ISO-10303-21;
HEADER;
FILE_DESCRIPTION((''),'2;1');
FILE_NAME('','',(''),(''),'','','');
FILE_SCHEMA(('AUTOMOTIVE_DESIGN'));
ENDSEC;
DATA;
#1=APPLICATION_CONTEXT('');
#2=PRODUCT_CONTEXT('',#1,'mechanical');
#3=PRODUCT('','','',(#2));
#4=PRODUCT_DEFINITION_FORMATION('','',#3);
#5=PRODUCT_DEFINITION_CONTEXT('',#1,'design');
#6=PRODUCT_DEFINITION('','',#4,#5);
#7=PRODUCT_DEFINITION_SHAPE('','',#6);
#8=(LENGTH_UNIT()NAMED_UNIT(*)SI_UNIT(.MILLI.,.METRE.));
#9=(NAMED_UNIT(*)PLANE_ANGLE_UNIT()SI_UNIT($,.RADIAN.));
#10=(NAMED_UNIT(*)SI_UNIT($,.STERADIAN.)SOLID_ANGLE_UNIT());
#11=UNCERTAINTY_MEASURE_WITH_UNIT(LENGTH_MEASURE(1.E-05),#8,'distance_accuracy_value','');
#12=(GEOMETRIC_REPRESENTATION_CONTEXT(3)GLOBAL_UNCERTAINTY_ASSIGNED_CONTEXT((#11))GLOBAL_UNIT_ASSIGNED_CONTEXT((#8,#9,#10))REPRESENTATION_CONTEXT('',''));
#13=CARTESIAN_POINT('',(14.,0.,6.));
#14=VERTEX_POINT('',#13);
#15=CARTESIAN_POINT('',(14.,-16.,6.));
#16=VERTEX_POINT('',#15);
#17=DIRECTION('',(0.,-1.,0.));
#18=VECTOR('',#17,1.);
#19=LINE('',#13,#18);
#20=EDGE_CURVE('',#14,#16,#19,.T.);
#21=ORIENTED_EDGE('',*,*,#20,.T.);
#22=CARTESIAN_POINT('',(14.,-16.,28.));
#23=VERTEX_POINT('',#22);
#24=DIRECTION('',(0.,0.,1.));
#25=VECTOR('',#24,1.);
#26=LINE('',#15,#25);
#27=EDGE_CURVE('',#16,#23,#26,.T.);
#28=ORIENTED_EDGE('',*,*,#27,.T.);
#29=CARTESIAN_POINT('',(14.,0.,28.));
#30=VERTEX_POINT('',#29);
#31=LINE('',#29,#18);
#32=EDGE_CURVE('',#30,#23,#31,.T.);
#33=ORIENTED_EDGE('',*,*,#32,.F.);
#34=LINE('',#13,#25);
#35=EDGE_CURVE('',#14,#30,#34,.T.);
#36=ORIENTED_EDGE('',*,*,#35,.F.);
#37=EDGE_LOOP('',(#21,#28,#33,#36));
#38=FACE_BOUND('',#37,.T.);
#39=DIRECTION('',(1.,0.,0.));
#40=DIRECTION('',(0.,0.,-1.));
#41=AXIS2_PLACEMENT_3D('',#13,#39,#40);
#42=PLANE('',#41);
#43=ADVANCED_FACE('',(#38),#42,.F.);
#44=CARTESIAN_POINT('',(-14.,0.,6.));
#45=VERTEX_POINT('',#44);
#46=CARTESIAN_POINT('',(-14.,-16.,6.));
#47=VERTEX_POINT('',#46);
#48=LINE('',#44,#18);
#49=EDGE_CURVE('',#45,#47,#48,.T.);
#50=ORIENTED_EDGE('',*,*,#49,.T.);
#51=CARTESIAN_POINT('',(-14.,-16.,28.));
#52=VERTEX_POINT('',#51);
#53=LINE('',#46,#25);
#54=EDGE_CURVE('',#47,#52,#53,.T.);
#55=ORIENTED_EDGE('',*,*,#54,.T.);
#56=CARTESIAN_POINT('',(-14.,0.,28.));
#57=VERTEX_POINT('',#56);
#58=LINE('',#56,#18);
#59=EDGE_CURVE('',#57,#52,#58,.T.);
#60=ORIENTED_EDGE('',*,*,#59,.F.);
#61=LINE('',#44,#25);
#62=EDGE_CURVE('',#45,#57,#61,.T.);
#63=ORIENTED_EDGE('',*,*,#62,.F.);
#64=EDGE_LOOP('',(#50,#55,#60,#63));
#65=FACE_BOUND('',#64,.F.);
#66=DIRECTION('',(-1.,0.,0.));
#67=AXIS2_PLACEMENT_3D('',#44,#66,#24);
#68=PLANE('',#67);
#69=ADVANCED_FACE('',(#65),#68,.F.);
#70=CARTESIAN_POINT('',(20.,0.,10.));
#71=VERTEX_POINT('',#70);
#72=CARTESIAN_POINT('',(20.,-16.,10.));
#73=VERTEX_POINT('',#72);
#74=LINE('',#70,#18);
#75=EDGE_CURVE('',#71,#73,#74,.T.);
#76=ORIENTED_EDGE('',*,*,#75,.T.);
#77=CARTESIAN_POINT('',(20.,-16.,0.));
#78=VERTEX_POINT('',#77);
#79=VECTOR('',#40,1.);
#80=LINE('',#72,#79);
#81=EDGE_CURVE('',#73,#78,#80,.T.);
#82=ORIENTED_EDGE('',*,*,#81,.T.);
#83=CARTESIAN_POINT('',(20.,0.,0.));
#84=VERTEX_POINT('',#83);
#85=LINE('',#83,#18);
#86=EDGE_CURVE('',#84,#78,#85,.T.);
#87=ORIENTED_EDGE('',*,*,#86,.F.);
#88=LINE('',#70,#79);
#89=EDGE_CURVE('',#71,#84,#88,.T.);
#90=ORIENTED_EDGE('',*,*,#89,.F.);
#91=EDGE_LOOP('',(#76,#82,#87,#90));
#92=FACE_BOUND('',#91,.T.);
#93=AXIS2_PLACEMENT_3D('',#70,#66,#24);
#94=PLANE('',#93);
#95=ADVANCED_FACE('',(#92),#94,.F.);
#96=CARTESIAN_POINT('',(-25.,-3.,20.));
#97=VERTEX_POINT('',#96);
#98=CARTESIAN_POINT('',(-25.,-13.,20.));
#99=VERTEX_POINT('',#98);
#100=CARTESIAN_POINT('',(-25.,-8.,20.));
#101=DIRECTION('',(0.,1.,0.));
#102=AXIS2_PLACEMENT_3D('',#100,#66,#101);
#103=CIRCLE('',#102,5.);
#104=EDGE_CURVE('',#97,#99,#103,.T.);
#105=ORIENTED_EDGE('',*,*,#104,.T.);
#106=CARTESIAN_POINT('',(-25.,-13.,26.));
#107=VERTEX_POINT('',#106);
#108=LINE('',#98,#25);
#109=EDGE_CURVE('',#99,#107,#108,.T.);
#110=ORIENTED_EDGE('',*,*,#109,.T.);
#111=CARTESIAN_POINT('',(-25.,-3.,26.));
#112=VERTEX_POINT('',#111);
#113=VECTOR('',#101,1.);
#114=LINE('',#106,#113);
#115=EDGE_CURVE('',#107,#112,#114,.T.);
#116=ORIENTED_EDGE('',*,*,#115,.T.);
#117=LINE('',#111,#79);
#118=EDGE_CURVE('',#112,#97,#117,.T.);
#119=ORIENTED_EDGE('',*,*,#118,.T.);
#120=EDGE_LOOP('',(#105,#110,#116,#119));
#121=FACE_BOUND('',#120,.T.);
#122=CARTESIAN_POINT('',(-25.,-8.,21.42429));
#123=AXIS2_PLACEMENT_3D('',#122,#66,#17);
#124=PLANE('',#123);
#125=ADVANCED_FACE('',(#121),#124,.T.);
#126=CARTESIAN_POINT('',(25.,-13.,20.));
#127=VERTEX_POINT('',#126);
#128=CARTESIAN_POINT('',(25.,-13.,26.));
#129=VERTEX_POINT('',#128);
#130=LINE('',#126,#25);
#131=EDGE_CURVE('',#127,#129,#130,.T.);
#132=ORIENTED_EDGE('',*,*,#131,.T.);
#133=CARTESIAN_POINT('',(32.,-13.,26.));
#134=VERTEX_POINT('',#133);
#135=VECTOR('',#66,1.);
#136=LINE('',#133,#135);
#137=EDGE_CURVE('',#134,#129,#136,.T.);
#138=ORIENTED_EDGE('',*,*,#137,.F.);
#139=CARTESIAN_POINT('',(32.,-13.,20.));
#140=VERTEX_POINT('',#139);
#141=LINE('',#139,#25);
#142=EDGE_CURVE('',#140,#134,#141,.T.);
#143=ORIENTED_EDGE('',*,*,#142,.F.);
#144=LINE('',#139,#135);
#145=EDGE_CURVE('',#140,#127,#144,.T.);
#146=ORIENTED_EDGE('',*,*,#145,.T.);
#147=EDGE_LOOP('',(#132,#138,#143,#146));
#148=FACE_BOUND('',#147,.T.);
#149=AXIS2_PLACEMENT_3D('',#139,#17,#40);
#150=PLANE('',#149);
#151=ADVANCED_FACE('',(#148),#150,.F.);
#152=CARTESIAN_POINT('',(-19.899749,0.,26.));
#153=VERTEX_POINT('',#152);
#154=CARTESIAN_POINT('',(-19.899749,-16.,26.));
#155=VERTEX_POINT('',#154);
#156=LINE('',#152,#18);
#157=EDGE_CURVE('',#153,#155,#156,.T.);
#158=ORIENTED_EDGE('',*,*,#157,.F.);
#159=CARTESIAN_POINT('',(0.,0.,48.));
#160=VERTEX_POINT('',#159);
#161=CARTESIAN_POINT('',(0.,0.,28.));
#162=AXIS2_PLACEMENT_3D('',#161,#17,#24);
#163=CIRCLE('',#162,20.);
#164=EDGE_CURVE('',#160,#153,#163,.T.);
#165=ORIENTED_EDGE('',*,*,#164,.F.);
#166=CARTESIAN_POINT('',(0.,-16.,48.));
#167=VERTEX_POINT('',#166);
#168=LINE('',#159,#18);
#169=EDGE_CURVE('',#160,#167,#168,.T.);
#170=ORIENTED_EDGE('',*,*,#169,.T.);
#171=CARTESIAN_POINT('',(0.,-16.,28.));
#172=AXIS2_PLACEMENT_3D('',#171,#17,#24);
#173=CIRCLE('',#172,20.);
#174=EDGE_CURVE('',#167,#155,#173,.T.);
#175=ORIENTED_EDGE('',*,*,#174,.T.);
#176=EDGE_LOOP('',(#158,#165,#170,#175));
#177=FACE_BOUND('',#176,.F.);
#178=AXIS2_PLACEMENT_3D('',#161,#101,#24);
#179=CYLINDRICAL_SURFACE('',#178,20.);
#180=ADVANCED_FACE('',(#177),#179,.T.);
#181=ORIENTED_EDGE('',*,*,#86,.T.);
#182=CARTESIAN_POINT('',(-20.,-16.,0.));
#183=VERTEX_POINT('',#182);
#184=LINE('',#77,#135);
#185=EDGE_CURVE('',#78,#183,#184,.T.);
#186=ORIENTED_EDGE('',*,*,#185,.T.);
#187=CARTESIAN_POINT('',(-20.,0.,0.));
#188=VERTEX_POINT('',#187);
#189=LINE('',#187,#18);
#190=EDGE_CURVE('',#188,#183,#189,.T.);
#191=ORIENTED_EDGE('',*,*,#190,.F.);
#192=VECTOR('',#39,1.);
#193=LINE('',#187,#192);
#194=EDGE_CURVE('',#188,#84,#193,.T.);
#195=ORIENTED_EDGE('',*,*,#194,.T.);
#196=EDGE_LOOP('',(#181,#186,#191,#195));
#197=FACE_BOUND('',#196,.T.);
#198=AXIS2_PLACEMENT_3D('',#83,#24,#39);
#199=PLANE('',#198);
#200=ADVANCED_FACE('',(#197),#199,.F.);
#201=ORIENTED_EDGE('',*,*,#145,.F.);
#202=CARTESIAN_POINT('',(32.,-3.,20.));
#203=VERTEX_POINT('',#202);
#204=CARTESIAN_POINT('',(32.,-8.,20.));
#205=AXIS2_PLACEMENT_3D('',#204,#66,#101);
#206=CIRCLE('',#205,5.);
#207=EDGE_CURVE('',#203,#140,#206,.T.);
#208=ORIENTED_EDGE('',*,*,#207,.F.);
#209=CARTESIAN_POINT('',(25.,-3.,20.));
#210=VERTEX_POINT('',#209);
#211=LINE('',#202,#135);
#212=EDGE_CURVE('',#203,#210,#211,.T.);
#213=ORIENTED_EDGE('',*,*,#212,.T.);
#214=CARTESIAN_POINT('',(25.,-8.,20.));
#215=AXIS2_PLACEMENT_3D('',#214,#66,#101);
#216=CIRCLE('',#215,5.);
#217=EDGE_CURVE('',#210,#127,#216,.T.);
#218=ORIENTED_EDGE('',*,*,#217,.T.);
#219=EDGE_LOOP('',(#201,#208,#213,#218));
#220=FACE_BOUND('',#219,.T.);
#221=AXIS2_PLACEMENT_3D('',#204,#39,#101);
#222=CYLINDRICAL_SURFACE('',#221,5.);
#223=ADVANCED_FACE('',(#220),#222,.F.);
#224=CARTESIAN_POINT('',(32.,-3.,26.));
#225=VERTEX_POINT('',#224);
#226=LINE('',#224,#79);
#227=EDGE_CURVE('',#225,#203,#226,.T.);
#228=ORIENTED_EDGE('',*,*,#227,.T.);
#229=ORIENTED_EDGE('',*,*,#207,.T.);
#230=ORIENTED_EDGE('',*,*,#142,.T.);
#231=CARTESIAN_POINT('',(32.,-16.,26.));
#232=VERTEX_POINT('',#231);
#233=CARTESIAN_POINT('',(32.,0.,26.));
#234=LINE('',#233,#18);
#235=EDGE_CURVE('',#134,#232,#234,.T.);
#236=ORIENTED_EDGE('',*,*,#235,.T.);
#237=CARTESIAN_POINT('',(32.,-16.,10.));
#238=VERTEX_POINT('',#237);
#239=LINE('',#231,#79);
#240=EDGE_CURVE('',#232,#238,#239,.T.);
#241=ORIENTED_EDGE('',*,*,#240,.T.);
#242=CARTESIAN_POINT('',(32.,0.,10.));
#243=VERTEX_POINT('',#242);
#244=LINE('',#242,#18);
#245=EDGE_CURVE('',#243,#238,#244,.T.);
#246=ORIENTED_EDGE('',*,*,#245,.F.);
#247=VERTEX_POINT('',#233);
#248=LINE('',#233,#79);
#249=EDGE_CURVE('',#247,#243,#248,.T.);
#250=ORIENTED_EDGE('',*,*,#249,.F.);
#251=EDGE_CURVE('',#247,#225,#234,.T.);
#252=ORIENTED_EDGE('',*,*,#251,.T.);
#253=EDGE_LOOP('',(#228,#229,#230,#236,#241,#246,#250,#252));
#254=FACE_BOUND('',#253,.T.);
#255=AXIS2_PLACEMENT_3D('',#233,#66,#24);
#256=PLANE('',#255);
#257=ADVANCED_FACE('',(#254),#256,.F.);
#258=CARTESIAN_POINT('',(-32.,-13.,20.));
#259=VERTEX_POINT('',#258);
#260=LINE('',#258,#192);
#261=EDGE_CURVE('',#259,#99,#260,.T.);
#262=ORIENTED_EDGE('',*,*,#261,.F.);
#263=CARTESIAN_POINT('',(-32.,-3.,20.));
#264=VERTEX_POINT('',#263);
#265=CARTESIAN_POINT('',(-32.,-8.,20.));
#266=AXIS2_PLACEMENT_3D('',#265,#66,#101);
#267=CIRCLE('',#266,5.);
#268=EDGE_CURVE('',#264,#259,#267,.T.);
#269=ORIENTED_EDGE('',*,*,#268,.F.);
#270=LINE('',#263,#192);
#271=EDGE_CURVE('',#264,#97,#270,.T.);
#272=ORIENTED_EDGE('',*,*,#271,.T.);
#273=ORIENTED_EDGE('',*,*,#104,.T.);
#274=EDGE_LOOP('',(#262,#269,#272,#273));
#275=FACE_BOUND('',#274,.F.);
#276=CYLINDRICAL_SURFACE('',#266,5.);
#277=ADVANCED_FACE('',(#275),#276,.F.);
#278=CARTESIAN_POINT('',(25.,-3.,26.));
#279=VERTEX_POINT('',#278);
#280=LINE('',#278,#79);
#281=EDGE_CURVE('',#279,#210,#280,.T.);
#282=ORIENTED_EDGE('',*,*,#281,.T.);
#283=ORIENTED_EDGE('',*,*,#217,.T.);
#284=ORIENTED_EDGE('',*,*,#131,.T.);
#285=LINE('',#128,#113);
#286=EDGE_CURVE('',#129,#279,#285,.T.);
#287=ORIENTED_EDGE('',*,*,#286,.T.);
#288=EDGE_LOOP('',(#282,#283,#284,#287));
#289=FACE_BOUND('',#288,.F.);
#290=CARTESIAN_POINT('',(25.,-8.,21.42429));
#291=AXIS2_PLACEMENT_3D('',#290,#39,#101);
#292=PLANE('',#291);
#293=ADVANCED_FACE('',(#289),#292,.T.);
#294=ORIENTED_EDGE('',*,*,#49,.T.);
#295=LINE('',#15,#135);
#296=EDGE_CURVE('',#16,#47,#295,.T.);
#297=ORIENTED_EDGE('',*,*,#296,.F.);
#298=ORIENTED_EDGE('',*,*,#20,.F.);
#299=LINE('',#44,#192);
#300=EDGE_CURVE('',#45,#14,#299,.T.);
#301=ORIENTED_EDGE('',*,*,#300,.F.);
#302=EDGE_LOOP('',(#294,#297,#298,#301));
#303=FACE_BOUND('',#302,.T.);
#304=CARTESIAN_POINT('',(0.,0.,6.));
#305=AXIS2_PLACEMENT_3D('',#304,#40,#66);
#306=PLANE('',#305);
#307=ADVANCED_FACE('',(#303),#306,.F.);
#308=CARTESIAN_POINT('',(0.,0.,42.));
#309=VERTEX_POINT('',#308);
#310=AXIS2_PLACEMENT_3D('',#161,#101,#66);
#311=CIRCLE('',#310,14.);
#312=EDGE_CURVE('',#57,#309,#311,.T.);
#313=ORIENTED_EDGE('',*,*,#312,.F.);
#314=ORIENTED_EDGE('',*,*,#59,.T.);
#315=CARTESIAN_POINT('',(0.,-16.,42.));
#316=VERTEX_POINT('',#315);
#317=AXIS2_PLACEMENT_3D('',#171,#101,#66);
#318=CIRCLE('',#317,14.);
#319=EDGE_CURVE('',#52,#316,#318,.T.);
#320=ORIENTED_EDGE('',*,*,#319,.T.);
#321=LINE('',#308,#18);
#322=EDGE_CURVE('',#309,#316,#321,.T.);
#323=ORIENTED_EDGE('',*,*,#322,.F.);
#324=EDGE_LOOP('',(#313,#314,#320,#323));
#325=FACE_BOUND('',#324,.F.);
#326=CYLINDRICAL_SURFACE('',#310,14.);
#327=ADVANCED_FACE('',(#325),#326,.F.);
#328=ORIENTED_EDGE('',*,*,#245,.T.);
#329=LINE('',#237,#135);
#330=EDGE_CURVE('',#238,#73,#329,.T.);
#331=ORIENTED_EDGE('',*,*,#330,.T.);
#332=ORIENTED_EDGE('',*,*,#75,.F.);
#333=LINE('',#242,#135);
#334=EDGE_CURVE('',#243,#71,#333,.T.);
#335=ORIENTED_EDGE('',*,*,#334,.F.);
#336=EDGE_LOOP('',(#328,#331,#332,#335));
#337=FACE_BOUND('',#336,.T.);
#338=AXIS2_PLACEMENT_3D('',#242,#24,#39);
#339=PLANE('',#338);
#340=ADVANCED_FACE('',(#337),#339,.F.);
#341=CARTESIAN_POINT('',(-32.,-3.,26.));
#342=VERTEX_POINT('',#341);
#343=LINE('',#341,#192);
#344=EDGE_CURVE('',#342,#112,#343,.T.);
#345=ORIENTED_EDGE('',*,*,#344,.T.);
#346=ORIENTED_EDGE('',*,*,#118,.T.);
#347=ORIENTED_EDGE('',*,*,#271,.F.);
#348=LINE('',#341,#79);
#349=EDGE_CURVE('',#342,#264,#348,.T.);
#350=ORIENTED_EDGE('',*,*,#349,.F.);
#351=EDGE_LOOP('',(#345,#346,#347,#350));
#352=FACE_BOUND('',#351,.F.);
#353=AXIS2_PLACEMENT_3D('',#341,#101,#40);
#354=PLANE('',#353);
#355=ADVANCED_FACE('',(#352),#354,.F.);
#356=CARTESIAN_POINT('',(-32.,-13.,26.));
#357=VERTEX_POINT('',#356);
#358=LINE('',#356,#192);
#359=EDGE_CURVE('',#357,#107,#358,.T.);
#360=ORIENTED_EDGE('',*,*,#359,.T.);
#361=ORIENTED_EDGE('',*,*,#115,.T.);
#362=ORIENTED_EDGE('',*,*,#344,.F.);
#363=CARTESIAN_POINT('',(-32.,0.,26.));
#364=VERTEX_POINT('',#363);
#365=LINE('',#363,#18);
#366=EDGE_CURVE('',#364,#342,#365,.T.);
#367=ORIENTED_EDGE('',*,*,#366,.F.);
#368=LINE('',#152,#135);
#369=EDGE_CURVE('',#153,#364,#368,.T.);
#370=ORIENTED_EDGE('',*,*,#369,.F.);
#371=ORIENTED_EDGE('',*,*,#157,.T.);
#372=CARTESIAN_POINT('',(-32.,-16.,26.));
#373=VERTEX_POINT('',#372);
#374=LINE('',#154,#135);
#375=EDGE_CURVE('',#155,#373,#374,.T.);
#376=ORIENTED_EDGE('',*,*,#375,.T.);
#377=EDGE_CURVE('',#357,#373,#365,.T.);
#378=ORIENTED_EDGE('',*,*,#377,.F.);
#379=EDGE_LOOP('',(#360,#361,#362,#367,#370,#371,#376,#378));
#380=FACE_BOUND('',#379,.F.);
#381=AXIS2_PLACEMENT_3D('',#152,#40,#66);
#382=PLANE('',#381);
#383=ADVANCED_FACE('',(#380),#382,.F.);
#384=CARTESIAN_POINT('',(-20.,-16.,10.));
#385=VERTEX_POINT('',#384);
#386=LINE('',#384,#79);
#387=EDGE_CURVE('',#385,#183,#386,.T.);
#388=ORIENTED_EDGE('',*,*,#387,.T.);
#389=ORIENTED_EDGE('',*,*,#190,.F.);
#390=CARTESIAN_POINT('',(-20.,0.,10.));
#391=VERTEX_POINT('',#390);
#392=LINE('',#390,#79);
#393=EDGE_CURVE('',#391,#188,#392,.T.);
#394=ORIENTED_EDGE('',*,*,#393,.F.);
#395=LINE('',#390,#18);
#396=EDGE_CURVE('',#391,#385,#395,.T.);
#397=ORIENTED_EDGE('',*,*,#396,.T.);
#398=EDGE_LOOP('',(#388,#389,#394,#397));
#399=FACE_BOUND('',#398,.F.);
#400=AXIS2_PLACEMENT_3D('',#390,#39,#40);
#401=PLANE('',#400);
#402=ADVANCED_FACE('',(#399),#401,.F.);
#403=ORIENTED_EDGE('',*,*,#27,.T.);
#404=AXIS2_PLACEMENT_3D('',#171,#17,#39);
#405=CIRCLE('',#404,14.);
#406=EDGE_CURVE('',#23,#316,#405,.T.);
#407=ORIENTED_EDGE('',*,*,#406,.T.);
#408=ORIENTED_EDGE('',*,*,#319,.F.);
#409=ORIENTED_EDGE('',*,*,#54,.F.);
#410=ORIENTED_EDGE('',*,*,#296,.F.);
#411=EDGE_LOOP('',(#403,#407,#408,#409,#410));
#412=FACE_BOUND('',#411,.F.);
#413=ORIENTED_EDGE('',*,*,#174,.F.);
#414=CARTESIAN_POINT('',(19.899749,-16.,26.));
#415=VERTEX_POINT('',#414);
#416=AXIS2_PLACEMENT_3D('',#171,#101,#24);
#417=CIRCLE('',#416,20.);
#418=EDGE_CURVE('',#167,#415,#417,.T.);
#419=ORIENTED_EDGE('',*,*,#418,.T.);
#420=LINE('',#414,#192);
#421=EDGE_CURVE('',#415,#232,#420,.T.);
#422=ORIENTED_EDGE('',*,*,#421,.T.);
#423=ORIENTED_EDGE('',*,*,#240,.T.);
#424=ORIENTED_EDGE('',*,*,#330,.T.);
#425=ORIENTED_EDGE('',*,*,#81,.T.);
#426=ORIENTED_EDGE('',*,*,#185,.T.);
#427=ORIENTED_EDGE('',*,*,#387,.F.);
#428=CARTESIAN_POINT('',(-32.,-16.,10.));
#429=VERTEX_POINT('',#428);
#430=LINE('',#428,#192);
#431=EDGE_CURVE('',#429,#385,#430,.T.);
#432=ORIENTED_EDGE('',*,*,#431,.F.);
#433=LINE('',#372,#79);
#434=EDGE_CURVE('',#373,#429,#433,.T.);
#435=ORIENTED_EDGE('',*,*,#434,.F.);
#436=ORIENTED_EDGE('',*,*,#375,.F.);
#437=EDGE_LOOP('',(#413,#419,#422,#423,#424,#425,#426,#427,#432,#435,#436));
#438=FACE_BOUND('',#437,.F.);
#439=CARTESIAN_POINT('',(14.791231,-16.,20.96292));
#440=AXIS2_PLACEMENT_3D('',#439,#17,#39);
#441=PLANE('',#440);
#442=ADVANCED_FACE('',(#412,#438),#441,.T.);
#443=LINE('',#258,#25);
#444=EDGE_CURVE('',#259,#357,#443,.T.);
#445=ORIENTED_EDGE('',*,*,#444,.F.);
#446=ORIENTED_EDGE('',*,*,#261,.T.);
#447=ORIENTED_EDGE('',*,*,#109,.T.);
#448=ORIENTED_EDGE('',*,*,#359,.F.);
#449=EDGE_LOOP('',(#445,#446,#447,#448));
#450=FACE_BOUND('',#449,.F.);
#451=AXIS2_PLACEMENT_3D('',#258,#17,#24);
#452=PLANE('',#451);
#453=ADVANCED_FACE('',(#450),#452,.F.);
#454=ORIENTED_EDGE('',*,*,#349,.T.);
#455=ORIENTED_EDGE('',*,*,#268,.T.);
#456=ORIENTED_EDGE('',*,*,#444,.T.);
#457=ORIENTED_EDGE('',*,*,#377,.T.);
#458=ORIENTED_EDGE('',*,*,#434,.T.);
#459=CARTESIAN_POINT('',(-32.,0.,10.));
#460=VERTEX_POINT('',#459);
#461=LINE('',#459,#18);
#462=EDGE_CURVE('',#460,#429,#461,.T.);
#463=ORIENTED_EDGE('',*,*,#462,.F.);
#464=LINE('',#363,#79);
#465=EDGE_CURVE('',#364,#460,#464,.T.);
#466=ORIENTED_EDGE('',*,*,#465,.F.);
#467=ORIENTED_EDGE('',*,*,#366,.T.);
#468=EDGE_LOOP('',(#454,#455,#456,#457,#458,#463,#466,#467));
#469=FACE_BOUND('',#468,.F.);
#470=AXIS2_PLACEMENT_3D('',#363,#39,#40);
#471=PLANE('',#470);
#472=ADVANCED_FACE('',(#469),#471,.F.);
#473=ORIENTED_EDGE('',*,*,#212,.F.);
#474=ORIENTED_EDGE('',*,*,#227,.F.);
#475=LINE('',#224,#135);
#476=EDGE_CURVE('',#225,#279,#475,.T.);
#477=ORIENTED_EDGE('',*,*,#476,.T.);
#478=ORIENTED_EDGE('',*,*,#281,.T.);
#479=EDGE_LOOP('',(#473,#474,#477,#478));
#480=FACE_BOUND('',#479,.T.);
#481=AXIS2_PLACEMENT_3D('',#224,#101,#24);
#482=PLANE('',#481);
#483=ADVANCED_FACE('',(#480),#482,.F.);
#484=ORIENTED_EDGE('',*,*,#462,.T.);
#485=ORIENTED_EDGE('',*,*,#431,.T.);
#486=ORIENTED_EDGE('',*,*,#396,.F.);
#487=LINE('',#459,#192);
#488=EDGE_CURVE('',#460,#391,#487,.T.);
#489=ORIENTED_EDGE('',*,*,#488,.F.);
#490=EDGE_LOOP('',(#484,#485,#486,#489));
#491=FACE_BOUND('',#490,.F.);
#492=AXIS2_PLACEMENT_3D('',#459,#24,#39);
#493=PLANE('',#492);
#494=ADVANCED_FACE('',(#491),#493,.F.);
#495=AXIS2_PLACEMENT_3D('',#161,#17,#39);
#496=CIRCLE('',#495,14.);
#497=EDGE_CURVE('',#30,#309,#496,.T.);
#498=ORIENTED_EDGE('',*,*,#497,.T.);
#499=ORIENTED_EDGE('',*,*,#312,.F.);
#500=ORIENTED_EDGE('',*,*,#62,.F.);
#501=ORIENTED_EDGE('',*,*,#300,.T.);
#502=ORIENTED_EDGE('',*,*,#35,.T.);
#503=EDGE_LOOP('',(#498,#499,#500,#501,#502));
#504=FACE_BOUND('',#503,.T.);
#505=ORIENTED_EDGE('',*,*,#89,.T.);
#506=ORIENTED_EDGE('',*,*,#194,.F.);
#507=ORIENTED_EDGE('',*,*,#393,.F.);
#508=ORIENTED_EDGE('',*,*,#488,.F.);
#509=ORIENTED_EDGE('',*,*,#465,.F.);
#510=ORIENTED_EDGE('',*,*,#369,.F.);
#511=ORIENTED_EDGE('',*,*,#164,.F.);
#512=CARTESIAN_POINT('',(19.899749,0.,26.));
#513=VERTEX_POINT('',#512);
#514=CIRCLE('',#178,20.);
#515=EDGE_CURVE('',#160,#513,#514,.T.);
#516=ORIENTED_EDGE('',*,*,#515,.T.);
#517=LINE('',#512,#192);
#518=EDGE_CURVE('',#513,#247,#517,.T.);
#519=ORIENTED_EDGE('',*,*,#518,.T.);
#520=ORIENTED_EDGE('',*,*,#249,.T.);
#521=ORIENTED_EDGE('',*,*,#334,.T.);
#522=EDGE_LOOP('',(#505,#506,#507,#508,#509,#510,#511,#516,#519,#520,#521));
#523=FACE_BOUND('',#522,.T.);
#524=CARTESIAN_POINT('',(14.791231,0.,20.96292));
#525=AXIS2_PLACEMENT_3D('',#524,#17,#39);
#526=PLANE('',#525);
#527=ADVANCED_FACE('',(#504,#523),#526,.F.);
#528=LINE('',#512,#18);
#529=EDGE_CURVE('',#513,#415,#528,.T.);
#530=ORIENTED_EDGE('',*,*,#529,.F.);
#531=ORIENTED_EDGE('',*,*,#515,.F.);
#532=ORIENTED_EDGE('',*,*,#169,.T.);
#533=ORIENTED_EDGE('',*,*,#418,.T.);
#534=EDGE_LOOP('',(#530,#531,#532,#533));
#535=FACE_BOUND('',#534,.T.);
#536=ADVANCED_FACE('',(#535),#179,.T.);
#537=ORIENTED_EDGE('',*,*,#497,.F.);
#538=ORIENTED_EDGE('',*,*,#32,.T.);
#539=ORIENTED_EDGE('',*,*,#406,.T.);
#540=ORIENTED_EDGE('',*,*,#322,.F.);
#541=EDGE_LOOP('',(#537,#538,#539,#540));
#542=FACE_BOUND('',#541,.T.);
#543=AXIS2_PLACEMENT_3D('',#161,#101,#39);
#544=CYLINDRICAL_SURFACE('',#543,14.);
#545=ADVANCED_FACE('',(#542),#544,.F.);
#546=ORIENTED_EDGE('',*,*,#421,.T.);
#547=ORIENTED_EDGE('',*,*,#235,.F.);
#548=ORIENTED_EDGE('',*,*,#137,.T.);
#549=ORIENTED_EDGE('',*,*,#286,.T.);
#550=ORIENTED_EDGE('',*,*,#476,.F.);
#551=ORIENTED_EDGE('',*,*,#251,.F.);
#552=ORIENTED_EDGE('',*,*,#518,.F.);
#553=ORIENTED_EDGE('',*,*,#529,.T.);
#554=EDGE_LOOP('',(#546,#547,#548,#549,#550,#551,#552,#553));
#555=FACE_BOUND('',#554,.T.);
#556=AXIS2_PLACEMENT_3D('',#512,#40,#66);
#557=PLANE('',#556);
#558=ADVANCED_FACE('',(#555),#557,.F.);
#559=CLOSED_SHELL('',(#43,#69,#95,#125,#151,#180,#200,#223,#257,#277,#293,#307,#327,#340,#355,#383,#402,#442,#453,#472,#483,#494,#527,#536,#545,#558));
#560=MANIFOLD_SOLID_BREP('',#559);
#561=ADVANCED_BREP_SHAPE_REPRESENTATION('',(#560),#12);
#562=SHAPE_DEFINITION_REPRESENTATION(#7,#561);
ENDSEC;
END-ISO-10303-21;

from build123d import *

# Parameters (mm, degrees)
F1_DEPTH = 16
F3_DEPTH = 7


# Not quite as in the source:
# - a pattern or mirror of a feature is missing from the dataset's text; its kind, count and spacing are read off the source's solid


with BuildPart() as f1:
    # F0 (on Front) → F1 (new body)
    with BuildSketch(Plane.XZ):
        with BuildLine():
            Line((-20, 0), (0, 0))
            Line((0, 0), (0, 6))
            Line((0, 6), (-14, 6))
            Line((-14, 6), (-14, 28))
            ThreePointArc((-14, 28), (-9.8994949366, 37.8994949366), (0, 42))
            Line((0, 42), (0, 48))
            ThreePointArc((0, 48), (-14.8323969742, 41.416407865), (-19.8997487421, 26))
            Line((-19.8997487421, 26), (-32, 26))
            Line((-32, 26), (-32, 10))
            Line((-32, 10), (-20, 10))
            Line((-20, 10), (-20, 0))
        make_face()
    extrude(amount=F1_DEPTH)

    # F1_copies: F1 across plane


with BuildPart() as f1_1:
    add(f1.part)
    add(f1.part.mirror(Plane(origin=(0, 0, 0), x_dir=(0, 0, 1), z_dir=(1, 0, 0))))

    # F2 (on face) → F3 (cut)
    with BuildSketch(Plane(origin=(-32, 0, 0), x_dir=(0, -1, 0), z_dir=(-1, 0, 0))):
        with BuildLine():
            Line((13, 26), (3, 26))
            Line((3, 26), (3, 20))
            ThreePointArc((3, 20), (8, 15), (13, 20))
            Line((13, 20), (13, 26))
        make_face()
    f3 = extrude(amount=-F3_DEPTH, mode=Mode.SUBTRACT)

    # F3_copies: F3 across plane
    add(f3.mirror(Plane(origin=(0, 0, 0), x_dir=(0, 0, 1), z_dir=(1, 0, 0))), mode=Mode.SUBTRACT)


solid = f1_1.part
